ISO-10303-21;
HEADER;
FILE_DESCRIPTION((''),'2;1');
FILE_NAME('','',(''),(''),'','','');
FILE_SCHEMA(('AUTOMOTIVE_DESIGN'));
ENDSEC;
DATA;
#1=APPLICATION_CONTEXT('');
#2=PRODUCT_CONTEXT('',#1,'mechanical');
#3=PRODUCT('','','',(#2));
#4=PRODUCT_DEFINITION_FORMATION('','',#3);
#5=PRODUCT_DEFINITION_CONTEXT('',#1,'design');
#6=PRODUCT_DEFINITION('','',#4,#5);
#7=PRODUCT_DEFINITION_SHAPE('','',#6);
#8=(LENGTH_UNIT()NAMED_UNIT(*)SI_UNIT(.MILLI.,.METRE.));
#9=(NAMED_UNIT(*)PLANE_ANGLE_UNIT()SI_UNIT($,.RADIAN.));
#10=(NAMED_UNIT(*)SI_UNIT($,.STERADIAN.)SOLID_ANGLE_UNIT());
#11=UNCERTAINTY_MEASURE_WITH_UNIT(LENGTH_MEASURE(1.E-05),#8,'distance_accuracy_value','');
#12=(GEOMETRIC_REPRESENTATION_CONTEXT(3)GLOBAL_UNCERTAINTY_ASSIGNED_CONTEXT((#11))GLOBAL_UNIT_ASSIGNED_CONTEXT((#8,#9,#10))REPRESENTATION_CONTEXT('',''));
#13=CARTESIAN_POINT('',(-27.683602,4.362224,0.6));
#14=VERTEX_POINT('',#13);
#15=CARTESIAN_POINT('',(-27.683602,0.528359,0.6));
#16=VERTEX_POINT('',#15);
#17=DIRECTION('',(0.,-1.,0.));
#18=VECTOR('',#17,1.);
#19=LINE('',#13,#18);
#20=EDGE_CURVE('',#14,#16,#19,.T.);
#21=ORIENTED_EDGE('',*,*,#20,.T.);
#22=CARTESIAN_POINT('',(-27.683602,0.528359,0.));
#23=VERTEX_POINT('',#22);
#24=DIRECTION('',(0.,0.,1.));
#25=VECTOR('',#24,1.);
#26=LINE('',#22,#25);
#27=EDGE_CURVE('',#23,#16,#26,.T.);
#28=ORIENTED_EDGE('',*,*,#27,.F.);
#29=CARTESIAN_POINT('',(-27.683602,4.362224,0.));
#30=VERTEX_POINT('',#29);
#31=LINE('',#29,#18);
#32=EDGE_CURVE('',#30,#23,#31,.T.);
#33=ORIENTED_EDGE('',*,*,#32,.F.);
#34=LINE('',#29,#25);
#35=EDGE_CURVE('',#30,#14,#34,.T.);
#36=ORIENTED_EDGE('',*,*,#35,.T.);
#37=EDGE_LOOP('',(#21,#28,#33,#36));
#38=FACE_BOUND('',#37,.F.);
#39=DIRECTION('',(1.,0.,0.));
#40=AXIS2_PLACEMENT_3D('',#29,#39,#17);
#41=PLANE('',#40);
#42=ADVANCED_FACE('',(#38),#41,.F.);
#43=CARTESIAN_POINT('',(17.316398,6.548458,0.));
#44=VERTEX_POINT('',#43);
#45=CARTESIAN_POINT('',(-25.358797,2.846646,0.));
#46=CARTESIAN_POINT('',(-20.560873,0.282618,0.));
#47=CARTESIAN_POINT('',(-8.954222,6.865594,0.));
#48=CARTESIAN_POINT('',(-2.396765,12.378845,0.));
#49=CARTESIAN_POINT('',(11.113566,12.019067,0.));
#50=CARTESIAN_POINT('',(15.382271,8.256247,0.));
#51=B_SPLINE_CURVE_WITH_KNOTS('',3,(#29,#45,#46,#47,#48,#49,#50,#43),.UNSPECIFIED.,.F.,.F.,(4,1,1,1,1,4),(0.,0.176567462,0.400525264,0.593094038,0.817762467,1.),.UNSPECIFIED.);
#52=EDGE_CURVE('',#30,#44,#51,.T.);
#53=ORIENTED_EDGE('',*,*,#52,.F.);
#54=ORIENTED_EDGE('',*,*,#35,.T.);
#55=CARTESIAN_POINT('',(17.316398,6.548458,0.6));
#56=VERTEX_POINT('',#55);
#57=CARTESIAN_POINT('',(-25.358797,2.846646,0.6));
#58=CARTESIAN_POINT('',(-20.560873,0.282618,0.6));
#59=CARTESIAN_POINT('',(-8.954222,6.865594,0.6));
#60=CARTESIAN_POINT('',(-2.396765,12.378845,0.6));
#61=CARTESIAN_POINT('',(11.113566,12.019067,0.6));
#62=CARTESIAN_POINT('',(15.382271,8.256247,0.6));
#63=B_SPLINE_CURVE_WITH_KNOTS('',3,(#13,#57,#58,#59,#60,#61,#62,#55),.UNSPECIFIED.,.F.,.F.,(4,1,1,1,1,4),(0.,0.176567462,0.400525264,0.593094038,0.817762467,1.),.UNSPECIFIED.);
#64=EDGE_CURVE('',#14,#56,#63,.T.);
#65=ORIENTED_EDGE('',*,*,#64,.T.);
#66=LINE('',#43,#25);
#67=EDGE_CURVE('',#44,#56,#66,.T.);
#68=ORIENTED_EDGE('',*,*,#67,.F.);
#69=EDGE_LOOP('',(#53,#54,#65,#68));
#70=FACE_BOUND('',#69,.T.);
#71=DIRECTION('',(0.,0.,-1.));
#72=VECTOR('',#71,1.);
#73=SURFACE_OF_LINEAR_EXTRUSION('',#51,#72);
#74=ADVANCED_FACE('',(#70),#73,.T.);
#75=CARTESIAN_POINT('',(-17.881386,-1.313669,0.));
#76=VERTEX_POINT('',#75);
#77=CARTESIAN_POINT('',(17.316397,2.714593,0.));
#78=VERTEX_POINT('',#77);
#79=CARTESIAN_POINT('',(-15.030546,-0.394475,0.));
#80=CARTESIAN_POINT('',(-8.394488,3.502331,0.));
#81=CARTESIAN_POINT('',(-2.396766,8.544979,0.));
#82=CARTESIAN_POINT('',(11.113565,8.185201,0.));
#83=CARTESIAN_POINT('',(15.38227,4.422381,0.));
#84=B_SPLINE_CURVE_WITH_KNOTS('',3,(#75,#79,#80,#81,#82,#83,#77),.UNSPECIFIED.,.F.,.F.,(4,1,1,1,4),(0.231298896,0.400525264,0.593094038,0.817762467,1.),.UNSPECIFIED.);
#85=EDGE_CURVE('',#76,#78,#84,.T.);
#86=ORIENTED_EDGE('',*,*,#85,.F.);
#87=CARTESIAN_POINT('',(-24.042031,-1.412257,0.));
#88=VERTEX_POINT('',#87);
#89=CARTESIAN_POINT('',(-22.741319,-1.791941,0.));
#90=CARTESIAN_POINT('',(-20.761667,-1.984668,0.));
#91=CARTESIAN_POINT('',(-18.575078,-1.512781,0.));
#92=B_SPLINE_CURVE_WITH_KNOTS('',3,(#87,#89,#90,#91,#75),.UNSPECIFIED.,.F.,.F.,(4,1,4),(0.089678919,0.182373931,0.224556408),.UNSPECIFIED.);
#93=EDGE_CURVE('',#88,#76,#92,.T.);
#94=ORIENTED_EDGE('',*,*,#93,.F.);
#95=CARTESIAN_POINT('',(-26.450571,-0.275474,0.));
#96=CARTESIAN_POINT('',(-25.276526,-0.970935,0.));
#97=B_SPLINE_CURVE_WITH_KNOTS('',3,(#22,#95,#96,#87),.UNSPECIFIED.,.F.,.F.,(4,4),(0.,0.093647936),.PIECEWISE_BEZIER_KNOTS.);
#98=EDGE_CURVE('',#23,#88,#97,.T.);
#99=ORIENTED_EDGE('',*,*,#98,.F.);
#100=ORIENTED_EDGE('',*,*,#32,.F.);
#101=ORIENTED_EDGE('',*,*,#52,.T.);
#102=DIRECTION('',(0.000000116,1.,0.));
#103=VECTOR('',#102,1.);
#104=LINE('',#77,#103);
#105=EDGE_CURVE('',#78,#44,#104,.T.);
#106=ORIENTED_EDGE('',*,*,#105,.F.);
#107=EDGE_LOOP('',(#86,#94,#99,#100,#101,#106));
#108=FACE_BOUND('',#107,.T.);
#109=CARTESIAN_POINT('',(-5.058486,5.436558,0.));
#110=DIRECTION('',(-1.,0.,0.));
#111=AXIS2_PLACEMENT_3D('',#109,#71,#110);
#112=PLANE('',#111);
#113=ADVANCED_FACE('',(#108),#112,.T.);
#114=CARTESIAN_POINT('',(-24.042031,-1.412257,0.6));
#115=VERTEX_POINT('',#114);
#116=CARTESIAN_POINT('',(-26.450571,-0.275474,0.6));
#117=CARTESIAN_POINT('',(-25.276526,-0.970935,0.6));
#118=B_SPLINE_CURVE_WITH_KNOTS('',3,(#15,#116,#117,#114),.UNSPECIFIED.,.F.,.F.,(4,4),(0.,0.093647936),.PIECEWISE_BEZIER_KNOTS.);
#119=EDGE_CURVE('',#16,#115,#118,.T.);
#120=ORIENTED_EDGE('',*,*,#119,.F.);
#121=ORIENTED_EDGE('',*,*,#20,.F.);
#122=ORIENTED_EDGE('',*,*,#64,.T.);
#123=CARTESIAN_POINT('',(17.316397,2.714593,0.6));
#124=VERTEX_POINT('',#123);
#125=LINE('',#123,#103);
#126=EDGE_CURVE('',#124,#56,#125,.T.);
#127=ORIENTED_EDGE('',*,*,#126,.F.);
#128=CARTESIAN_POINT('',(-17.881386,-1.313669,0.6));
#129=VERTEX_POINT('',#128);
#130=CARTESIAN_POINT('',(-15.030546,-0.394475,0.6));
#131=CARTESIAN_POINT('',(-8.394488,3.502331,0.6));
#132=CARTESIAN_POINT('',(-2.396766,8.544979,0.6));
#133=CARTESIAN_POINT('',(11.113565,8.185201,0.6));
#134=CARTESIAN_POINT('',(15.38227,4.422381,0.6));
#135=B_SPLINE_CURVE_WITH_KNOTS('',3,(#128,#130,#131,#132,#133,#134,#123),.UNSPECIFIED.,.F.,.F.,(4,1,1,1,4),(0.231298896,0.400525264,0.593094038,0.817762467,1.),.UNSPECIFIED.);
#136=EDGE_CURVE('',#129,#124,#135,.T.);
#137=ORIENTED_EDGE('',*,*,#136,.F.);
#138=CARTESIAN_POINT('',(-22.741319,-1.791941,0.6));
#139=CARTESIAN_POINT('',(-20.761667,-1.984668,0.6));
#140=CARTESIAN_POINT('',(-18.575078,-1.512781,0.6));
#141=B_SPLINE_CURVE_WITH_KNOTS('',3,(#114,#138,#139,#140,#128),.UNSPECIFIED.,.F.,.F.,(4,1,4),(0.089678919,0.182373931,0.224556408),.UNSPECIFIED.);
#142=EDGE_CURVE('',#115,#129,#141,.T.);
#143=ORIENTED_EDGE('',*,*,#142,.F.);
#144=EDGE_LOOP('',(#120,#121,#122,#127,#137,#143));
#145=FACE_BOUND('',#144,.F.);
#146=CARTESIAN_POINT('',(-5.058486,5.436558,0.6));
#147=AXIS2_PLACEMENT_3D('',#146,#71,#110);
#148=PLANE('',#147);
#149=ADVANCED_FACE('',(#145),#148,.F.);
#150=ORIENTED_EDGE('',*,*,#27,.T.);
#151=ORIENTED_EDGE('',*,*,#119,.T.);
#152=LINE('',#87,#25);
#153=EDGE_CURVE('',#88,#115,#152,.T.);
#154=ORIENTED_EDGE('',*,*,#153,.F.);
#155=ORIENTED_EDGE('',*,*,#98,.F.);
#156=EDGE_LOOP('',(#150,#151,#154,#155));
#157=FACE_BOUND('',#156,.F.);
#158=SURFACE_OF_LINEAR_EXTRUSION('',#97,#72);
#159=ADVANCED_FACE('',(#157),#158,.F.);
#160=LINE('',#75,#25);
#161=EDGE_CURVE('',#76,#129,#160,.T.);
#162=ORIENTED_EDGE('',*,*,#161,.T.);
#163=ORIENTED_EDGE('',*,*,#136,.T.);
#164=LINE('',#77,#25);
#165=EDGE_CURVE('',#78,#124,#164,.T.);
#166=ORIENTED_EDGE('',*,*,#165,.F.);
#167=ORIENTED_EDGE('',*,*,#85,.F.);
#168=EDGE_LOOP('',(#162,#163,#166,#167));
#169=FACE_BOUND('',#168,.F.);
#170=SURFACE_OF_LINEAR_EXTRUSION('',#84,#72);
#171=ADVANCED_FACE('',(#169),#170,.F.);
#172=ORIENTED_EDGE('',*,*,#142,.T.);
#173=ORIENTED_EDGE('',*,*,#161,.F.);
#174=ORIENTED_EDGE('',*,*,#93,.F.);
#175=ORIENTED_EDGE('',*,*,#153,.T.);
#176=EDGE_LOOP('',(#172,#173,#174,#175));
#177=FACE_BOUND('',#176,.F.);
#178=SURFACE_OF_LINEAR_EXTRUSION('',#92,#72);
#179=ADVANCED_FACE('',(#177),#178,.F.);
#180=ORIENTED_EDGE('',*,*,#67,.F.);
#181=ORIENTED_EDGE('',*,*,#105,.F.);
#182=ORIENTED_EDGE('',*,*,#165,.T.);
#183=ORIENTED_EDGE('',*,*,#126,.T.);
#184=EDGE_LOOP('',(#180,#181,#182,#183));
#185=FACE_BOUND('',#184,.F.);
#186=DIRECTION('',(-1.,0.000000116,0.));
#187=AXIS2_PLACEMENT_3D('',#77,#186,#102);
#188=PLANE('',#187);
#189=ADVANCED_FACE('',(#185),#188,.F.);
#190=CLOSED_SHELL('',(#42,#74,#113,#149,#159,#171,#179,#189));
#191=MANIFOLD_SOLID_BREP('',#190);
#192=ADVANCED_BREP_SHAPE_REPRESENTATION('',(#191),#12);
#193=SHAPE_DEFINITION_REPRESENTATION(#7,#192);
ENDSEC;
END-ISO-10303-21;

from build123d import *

# Parameters (mm, degrees)
F1_DEPTH = 0.6


# Not quite as in the source:
# - ends of sketch curves that miss each other by under 0.0002 mm in the source are joined


with BuildPart() as f1:
    # F0 (on Top) → F1 (new body)
    with BuildSketch(Plane.XY):
        with BuildLine():
            add(Edge.make_bspline(
                [(-27.683602202, 4.3622240029), (-25.358796936, 2.84664598), (-20.5608734618, 0.2826177406), (-8.9542219297, 6.8655938987), (-2.3967650886, 12.3788446821), (11.1135658845, 12.0190665422), (15.3822705643, 8.2562465754), (17.316397798, 6.5484584641)],
                knots=[0, 0, 0, 0, 0.1765674616, 0.400525264, 0.5930940384, 0.8177624668, 1, 1, 1, 1], degree=3))
            Line((-27.683602202, 4.3622240029), (-27.683602202, 0.5283586101))
            add(Edge.make_bspline(
                [(-27.683602202, 0.5283586101), (-26.4505713043, -0.2754743949), (-25.2765264365, -0.9709345602), (-24.0420313354, -1.4122566)],
                knots=[0, 0, 0, 0, 0.0936479357, 0.0936479357, 0.0936479357, 0.0936479357], degree=3))
            add(Edge.make_bspline(
                [(-24.0420313354, -1.4122566), (-22.7413190859, -1.7919411675), (-20.7616668205, -1.9846677675), (-18.5750781824, -1.5127811233), (-17.8813856832, -1.3136689309)],
                knots=[0.0896789193, 0.0896789193, 0.0896789193, 0.0896789193, 0.182373931, 0.2245564082, 0.2245564082, 0.2245564082, 0.2245564082], degree=3))
            add(Edge.make_bspline(
                [(-17.8813856832, -1.3136689309), (-15.0305462556, -0.3944745735), (-8.3944877894, 3.5023312426), (-2.3967655326, 8.5449792893), (11.1135654405, 8.1852011494), (15.3822701203, 4.4223811826), (17.316397354, 2.7145930713)],
                knots=[0.2312988961, 0.2312988961, 0.2312988961, 0.2312988961, 0.400525264, 0.5930940384, 0.8177624668, 1, 1, 1, 1], degree=3))
            Line((17.316397354, 2.7145930713), (17.316397798, 6.5484584641))
        make_face()
    extrude(amount=F1_DEPTH)


solid = f1.part
